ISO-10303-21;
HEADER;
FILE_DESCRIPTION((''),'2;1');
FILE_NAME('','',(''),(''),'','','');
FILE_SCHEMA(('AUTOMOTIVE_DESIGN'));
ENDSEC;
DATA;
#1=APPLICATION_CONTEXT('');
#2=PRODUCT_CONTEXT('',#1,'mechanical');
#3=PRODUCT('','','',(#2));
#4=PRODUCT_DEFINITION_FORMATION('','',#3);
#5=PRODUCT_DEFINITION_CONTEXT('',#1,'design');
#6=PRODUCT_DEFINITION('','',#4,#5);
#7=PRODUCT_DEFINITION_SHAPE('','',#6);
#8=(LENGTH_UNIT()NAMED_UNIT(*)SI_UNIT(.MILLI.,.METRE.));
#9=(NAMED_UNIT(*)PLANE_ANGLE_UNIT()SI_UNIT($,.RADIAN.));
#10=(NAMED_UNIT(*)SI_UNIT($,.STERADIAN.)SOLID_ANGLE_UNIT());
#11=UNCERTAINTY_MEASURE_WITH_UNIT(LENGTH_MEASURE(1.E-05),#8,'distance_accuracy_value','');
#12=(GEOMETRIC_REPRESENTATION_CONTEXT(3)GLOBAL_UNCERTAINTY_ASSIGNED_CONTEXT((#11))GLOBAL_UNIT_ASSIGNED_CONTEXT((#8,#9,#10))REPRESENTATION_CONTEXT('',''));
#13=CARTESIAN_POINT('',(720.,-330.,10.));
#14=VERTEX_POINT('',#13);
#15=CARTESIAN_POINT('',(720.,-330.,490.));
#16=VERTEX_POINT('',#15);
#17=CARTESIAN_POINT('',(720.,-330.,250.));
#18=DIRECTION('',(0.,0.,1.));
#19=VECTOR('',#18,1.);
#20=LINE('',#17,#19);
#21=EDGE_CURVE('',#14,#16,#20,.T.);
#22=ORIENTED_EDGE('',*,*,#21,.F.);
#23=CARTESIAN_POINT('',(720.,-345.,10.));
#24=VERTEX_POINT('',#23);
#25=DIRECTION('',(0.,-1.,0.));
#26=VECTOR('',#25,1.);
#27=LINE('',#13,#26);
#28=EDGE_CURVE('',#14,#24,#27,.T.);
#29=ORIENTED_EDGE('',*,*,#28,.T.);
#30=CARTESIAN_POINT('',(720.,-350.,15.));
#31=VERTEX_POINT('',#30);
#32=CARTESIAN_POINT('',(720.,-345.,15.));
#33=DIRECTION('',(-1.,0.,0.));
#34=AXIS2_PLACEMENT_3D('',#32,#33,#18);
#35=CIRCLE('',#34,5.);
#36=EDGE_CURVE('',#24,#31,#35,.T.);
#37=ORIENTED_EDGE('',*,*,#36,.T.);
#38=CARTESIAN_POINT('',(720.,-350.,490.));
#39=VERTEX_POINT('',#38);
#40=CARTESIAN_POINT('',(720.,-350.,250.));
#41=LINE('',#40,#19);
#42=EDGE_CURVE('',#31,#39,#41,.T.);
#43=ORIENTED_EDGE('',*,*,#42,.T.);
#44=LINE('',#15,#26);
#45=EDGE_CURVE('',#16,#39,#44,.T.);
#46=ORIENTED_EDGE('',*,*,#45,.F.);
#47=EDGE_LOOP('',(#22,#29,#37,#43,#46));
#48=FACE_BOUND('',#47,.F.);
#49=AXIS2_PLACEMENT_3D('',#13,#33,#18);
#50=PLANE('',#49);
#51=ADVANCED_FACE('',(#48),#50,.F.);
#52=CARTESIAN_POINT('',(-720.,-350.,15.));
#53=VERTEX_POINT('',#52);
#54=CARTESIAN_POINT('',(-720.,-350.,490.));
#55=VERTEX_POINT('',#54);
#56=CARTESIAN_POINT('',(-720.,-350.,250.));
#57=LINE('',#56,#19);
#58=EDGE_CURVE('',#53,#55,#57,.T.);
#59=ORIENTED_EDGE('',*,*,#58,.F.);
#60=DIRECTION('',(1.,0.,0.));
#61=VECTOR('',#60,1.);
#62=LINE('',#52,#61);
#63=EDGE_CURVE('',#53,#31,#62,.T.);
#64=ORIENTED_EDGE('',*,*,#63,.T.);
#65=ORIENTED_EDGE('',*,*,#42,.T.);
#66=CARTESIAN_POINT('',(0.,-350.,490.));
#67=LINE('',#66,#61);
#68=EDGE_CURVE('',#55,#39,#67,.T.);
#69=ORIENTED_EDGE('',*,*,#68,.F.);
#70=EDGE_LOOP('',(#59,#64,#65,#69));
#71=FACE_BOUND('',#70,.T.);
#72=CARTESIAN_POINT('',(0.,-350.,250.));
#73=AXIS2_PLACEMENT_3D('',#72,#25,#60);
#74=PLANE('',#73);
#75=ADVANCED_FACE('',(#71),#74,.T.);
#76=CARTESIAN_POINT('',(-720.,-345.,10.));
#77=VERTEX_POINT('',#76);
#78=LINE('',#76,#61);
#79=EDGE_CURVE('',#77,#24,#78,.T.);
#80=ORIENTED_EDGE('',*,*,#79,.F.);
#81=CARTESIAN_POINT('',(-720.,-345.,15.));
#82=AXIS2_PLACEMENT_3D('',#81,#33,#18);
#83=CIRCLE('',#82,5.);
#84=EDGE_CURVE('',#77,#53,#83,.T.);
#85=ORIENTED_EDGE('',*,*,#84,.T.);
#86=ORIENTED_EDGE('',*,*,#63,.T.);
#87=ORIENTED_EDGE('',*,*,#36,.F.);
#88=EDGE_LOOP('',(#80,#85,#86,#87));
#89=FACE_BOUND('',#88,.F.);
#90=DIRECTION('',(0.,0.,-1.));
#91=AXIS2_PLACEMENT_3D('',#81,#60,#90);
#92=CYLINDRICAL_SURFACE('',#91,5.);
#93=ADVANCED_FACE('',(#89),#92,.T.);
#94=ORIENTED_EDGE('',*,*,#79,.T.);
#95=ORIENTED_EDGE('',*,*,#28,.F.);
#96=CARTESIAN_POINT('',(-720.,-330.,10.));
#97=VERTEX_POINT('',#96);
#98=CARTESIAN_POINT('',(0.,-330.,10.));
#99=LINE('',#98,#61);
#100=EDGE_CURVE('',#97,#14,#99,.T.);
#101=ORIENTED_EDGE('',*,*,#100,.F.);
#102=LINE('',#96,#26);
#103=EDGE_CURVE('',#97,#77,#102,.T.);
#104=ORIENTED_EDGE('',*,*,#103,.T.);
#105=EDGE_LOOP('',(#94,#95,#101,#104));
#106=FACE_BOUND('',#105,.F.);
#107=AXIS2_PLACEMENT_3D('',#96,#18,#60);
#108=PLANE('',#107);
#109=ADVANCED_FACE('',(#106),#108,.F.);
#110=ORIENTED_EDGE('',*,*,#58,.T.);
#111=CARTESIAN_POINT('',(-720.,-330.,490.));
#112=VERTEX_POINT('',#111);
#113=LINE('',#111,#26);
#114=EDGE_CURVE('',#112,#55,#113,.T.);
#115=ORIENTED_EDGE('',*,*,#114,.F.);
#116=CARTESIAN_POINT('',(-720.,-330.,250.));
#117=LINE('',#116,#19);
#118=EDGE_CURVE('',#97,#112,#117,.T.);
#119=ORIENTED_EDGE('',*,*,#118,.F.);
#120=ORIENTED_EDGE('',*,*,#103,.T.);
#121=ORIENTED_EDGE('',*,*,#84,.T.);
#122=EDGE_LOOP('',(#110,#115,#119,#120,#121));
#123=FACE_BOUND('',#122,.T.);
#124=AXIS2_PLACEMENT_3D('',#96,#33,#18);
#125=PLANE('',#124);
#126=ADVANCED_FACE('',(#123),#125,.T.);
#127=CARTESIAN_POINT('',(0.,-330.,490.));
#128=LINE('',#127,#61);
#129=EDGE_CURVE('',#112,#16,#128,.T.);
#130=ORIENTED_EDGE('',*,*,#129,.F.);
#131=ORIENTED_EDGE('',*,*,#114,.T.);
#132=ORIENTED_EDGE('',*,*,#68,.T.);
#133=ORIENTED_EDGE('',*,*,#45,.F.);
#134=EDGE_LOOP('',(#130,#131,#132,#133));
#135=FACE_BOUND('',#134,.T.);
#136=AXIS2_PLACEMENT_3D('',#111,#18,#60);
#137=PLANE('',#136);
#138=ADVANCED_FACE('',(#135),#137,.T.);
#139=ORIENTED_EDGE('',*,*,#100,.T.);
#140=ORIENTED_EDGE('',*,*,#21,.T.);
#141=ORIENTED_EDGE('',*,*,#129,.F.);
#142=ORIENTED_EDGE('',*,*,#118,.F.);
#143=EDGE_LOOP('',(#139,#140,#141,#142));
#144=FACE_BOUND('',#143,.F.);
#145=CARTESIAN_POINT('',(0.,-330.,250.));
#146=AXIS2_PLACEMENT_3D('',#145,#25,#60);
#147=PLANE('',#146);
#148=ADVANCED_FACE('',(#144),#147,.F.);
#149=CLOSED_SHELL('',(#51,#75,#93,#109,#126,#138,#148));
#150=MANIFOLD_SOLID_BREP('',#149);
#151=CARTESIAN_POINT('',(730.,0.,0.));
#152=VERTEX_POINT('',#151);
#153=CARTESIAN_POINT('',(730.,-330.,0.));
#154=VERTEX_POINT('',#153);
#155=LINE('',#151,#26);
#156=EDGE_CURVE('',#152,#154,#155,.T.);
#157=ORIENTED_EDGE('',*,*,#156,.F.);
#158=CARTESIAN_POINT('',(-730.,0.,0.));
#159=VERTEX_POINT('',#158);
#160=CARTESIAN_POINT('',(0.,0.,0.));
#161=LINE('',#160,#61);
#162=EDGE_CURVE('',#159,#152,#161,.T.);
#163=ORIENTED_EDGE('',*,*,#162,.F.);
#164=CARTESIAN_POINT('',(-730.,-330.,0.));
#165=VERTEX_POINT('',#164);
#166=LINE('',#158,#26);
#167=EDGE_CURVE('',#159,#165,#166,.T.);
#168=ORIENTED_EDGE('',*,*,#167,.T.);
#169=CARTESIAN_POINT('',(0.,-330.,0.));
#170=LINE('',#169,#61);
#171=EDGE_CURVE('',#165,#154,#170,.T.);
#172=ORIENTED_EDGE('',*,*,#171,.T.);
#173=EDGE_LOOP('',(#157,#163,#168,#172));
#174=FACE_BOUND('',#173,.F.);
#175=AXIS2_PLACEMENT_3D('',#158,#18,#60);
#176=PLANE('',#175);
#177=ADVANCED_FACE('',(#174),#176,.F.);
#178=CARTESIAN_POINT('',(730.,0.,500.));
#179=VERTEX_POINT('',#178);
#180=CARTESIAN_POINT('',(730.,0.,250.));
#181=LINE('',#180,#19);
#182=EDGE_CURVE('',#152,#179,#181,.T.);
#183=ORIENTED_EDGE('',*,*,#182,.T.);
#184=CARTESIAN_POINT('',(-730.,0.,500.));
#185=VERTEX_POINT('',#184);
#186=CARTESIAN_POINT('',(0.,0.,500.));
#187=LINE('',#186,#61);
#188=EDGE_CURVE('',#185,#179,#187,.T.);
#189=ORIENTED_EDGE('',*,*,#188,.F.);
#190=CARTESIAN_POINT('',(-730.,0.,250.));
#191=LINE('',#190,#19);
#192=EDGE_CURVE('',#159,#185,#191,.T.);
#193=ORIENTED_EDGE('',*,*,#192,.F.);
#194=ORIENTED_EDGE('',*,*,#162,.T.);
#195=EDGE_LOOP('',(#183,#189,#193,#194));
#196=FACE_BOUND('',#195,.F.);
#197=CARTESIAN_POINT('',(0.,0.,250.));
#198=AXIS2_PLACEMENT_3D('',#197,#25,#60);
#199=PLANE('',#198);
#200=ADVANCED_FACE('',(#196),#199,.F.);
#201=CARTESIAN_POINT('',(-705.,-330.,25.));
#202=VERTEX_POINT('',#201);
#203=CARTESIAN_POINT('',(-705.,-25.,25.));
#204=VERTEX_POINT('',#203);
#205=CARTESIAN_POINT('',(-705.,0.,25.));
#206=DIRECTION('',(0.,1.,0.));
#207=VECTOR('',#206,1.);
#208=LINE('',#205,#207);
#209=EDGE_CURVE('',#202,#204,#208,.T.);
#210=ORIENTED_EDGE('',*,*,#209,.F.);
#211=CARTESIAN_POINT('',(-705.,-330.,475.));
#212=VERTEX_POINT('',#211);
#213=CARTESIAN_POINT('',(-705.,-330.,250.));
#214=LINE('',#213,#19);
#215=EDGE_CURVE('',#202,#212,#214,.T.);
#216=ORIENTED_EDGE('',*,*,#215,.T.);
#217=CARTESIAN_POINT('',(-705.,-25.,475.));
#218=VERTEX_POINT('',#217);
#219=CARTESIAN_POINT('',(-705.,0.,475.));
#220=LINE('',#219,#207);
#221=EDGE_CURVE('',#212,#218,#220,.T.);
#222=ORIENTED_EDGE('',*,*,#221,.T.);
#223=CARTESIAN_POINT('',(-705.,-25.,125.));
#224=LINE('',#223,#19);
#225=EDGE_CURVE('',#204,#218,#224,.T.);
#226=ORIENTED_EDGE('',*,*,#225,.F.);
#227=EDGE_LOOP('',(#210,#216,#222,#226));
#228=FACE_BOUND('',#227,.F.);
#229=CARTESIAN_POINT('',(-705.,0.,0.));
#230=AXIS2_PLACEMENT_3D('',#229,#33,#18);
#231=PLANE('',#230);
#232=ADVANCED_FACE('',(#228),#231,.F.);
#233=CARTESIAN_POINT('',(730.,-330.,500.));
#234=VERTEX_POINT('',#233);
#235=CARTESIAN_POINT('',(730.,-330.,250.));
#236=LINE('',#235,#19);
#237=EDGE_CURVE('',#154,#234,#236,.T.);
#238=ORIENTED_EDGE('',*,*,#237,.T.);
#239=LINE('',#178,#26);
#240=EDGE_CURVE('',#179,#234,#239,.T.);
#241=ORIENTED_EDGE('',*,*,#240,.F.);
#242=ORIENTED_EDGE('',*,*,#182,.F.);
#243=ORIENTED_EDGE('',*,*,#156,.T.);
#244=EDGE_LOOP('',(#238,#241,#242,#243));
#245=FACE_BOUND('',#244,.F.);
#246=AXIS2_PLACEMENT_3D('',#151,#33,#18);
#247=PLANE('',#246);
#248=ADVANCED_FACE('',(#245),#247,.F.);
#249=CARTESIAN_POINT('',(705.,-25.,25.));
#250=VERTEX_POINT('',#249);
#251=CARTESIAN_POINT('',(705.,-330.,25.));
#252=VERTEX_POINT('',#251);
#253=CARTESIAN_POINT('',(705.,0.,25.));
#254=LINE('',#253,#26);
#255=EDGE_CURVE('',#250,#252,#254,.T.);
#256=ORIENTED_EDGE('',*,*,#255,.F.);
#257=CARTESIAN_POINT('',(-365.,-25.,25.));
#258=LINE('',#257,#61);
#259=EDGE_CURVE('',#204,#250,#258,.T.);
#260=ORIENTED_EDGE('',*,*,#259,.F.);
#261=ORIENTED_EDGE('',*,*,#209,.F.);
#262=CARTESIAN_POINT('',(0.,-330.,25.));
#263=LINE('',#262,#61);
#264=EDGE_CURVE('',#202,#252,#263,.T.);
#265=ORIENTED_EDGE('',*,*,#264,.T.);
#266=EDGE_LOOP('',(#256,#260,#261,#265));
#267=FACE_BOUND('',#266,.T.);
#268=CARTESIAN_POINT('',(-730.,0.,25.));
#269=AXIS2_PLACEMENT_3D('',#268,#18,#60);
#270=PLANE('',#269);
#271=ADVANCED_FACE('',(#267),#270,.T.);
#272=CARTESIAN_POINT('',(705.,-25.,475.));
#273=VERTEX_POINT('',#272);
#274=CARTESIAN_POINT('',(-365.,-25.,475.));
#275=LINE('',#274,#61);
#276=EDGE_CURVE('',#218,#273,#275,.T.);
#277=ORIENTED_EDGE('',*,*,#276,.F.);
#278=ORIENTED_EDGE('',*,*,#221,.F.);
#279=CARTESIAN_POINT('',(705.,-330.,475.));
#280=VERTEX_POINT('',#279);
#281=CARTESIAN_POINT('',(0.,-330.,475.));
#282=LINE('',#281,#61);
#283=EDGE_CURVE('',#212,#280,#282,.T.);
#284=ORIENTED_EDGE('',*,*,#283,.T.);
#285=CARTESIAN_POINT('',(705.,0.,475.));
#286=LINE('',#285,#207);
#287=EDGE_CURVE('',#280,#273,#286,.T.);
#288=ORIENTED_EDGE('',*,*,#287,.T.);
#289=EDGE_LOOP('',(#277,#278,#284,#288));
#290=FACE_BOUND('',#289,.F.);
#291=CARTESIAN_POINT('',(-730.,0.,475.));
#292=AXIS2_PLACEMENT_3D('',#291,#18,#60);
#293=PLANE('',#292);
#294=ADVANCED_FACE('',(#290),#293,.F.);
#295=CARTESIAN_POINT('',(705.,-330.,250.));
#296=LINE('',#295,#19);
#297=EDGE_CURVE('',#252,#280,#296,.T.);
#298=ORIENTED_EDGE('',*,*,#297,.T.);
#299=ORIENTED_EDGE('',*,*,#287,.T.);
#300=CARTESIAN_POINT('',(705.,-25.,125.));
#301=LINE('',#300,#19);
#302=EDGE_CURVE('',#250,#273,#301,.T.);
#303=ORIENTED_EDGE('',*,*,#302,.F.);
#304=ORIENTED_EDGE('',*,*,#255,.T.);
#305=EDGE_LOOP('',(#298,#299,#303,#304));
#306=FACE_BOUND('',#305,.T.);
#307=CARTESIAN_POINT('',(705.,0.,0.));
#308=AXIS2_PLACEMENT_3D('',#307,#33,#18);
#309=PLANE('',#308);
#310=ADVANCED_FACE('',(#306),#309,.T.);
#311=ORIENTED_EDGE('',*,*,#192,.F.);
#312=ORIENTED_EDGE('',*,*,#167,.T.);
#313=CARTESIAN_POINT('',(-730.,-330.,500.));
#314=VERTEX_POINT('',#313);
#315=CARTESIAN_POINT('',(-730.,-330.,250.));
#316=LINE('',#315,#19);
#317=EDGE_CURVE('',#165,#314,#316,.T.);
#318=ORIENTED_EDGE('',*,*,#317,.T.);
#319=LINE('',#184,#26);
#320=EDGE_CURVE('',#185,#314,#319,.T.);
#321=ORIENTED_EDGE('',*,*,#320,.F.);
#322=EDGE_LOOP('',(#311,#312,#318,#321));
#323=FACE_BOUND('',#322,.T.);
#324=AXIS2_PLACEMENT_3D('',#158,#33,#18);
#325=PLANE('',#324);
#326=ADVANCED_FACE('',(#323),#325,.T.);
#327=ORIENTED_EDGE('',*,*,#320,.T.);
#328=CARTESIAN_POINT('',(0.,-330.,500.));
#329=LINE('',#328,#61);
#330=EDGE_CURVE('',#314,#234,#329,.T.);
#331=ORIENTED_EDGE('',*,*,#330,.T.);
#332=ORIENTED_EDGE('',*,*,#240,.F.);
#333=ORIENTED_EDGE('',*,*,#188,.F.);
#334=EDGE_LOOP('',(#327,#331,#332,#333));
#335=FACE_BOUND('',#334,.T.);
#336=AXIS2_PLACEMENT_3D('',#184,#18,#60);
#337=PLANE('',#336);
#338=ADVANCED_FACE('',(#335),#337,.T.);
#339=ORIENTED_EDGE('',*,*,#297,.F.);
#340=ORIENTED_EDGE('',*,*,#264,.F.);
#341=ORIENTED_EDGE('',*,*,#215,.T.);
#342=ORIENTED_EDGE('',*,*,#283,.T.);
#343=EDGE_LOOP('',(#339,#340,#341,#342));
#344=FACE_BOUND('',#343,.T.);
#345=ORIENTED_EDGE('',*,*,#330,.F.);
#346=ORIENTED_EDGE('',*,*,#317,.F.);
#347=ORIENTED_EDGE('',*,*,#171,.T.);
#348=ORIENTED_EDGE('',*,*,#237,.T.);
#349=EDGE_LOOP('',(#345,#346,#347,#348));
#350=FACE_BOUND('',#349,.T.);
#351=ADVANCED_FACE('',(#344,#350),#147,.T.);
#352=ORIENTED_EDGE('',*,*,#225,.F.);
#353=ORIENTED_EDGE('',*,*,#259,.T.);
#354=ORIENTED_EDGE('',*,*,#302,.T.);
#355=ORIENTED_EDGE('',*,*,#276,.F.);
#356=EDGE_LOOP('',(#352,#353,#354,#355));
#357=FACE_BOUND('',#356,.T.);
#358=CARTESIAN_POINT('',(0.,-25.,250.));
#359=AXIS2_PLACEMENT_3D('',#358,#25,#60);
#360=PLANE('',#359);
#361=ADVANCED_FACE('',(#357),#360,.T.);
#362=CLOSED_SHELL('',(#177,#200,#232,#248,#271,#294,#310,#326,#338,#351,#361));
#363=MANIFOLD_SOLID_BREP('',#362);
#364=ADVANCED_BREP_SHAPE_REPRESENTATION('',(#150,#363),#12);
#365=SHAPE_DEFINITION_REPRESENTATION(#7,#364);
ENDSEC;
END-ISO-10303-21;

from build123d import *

# Parameters (mm, degrees)
F0_W     = 1460
F0_H     = 500
F1_DEPTH = 330
F2_T     = -25
F3_W     = 1440
F3_H     = 480
F4_DEPTH = 20
F5_R     = 5


# Not quite as in the source:
# - a feature names something its author has since deleted; it is built from what else it names


with BuildPart() as f1:
    # F0 (on Front) → F1 (new body)
    with BuildSketch(Plane.XZ):
        with Locations((0, 250)):
            Rectangle(F0_W, F0_H)
    extrude(amount=F1_DEPTH)

    # F2
    f2_openings = [f1.faces().sort_by_distance(p)[0] for p in [
        (0, -330, 250),
    ]]
    offset(amount=F2_T, openings=f2_openings)


with BuildPart() as f4:
    # F3 (on face) → F4 (new body)
    with BuildSketch(Plane.XZ.offset(330)):
        with Locations((0, 250)):
            Rectangle(F3_W, F3_H)
    extrude(amount=F4_DEPTH)

    # F5
    f5_edges = [f4.edges().sort_by_distance(p)[0] for p in [
        (0, -350, 10),
    ]]
    fillet(f5_edges, radius=F5_R)


solid = Compound([f1.part, f4.part])
